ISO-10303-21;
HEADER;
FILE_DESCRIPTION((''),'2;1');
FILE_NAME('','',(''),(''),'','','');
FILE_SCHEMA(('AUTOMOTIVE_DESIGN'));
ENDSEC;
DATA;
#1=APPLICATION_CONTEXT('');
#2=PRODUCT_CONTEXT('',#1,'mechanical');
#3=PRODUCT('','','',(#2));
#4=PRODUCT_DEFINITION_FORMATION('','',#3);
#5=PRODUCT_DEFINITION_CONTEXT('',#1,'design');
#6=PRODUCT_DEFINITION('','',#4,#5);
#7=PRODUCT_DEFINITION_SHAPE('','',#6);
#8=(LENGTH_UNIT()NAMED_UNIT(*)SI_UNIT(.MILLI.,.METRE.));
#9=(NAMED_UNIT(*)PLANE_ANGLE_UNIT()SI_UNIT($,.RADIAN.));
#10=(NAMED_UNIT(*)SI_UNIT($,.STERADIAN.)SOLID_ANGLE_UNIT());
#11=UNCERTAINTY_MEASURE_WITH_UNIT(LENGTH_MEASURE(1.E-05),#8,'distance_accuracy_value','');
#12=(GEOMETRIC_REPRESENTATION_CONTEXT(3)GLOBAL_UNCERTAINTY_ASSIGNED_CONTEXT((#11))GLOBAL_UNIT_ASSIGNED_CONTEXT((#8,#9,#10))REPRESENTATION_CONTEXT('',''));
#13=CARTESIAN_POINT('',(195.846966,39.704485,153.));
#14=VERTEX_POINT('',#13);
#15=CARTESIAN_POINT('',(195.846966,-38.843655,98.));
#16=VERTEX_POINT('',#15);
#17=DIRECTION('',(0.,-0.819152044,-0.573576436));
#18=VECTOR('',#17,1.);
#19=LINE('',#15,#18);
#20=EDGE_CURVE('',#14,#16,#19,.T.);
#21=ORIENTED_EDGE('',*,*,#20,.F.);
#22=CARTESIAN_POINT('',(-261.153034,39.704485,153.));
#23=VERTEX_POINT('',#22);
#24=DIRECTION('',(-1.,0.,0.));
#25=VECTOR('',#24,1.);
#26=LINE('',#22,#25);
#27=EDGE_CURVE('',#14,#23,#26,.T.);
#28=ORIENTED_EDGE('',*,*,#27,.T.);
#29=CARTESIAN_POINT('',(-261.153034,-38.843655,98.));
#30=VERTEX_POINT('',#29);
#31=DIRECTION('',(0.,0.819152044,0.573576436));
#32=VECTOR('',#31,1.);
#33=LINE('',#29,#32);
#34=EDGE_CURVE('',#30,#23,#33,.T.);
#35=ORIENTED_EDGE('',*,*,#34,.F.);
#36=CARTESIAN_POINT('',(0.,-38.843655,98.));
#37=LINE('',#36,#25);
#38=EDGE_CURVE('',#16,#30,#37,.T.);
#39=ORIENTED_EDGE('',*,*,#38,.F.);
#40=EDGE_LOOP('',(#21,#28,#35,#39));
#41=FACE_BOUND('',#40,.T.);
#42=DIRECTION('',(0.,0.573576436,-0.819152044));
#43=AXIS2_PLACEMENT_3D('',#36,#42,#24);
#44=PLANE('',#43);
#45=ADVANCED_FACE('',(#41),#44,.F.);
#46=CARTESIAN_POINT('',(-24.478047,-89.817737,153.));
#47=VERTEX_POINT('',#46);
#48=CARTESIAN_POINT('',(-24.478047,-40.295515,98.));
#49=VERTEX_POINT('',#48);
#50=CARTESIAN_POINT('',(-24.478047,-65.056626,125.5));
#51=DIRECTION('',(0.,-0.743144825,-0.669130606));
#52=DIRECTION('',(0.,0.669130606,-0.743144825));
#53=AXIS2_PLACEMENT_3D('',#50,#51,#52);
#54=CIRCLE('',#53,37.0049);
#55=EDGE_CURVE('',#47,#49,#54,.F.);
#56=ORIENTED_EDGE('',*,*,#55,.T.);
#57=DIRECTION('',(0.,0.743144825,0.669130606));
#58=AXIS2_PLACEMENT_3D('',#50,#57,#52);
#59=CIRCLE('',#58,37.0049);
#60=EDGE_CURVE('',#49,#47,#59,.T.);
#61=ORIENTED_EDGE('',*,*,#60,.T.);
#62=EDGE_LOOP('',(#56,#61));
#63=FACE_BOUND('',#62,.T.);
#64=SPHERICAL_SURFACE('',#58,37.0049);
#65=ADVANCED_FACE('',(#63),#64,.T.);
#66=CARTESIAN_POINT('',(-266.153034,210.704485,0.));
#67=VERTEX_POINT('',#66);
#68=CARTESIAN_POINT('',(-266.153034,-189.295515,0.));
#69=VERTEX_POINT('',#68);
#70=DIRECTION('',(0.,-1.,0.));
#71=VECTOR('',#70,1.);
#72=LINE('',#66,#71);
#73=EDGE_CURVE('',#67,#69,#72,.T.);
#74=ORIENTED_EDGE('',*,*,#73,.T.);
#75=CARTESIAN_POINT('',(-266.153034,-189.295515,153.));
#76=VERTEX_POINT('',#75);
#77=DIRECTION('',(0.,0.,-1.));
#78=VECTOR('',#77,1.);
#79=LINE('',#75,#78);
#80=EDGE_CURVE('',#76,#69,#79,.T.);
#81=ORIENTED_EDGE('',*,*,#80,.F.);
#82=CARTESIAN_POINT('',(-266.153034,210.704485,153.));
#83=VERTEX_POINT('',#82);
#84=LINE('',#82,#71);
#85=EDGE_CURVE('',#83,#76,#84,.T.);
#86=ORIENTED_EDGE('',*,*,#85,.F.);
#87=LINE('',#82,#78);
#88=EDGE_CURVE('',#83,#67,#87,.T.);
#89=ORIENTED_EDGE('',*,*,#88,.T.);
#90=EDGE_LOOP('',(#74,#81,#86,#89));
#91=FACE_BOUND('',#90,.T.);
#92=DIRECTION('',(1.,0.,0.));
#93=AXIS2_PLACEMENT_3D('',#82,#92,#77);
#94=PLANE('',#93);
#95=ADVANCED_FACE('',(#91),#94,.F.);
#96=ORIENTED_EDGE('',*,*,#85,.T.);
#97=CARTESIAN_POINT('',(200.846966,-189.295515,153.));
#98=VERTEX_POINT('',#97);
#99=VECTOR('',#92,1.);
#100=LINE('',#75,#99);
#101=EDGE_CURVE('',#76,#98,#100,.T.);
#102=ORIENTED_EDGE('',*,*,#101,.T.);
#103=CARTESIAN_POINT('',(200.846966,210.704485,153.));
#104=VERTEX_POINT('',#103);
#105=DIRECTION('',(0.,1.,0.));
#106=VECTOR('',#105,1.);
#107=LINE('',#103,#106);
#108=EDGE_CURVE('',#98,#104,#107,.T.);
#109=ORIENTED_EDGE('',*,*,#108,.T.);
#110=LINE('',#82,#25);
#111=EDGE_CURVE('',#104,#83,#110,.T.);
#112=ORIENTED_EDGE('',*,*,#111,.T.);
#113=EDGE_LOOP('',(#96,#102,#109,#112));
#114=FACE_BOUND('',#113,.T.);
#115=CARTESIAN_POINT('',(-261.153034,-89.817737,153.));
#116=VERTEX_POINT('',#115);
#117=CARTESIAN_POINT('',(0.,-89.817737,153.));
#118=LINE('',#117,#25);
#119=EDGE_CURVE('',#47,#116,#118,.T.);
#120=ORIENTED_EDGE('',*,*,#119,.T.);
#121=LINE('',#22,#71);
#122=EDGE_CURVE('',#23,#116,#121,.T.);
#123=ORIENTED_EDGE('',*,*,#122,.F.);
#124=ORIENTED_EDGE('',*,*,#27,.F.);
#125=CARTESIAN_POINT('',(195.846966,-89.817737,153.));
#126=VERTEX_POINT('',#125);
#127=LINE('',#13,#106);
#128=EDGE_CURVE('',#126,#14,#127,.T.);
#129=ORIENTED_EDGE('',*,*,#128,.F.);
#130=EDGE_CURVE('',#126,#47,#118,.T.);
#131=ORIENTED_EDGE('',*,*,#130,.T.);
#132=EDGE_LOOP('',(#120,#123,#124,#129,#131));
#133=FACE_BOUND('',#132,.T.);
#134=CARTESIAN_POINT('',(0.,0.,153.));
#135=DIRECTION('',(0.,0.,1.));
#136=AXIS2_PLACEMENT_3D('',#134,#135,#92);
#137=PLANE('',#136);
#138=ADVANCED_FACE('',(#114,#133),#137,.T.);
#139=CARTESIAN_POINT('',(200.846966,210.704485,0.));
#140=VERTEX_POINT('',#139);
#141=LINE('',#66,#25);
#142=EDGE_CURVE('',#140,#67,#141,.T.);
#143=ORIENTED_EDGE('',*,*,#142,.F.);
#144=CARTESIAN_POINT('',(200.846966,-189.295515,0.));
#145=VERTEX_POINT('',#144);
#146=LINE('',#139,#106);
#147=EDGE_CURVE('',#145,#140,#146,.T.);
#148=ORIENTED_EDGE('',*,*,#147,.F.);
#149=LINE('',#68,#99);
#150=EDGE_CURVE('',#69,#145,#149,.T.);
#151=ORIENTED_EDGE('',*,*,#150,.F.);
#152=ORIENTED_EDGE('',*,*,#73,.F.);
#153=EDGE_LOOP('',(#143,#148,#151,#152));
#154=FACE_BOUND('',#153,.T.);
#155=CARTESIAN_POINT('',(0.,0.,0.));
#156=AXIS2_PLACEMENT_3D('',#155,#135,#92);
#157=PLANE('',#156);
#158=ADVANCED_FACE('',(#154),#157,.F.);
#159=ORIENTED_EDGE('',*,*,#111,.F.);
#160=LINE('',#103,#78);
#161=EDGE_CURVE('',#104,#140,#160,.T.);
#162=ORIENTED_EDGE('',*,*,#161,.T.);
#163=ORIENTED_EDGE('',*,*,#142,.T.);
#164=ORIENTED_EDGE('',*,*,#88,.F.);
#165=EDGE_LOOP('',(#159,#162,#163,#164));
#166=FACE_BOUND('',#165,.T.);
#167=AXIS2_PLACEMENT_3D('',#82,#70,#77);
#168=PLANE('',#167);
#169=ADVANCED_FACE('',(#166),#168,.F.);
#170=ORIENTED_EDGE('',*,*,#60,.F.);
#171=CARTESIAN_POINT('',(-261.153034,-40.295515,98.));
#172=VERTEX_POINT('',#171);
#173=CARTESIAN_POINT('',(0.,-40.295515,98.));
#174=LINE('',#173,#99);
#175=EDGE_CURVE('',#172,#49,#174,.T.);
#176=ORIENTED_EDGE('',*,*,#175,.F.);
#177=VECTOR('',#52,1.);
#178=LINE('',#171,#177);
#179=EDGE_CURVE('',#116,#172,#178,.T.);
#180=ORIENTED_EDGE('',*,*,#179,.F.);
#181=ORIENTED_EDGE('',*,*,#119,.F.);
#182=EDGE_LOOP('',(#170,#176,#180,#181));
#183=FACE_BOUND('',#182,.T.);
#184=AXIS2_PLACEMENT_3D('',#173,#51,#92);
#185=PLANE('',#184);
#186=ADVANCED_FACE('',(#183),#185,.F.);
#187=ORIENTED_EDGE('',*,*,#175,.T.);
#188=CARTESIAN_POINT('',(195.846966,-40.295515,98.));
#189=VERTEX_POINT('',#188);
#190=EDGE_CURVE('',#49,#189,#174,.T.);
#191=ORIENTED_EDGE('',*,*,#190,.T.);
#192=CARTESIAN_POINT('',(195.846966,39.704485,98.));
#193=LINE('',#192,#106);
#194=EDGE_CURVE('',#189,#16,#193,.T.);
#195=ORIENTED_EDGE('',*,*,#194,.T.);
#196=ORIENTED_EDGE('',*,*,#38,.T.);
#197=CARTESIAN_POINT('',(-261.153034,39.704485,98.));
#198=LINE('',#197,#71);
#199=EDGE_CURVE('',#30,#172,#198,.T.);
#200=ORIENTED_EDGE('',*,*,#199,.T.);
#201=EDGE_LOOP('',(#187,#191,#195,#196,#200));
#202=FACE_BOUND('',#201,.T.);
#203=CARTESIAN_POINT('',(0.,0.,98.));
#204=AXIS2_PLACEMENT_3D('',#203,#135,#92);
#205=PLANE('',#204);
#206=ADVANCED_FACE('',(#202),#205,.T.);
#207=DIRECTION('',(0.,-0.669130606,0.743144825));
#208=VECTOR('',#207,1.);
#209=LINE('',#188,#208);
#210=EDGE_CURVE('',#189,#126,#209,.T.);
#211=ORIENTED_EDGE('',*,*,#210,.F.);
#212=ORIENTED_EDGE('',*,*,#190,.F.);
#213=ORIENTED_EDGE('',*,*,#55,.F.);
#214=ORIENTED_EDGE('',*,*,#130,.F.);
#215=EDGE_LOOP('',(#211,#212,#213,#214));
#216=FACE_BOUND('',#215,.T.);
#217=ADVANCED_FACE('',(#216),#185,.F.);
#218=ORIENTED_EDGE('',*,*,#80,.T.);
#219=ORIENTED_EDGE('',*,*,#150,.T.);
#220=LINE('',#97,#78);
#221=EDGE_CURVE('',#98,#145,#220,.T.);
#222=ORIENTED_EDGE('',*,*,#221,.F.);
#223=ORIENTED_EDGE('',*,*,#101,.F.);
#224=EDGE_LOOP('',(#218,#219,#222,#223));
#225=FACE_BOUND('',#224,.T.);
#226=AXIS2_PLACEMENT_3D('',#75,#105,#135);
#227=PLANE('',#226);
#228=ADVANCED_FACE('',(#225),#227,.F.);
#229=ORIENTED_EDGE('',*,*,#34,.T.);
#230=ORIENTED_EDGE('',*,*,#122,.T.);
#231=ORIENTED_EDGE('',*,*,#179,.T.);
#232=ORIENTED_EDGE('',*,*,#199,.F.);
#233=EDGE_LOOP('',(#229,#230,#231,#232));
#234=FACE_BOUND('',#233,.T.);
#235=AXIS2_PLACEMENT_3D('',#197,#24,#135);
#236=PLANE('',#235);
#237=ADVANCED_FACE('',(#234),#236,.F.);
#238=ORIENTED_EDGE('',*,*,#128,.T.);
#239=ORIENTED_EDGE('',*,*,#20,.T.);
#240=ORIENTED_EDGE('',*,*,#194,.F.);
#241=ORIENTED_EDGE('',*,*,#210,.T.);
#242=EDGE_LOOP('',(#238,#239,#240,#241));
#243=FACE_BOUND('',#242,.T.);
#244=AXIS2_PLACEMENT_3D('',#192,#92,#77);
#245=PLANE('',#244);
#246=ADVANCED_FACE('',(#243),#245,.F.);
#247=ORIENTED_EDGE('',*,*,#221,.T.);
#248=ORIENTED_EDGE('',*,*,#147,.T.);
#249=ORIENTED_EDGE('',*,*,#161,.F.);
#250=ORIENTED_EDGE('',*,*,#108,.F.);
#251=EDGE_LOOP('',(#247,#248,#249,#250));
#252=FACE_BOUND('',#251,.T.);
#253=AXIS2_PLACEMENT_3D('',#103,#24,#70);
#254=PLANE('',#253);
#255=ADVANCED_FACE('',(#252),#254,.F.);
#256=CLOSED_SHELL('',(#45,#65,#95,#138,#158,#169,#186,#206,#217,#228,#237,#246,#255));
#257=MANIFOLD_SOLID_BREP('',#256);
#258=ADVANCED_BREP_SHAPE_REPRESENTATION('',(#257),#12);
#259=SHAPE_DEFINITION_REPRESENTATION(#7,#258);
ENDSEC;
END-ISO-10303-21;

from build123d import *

# Parameters (mm, degrees)
ESQUISSE1_W             = 467
ESQUISSE1_H             = 400
BOSS_EXTRU_1_DEPTH      = 153
ESQUISSE2_W             = 457
ESQUISSE2_H             = 130
ENL_V_MAT_EXTRU_1_DEPTH = 55
CHANFREIN2_SIZE2        = 78.548140371
CHANFREIN2_SIZE         = 55
CHANFREIN3_SIZE         = 50
CHANFREIN3_SIZE_2       = 55.530625741
R_VOLUTION1_ANGLE       = 182


# Some blends are built 0.0001 mm under size
with BuildPart() as part:
    # Esquisse1 → Boss.-Extru.1 (new body)
    with BuildSketch(Plane.XY):
        with Locations((-32.653034301, 10.704485488)):
            Rectangle(ESQUISSE1_W, ESQUISSE1_H)
    extrude(amount=BOSS_EXTRU_1_DEPTH)

    # Esquisse2 → Enlèv. mat.-Extru.1 (cut)
    with BuildSketch(Plane.XY.offset(153)):
        with Locations((-32.653034301, -25.295514512)):
            Rectangle(ESQUISSE2_W, ESQUISSE2_H)
    extrude(amount=-ENL_V_MAT_EXTRU_1_DEPTH, mode=Mode.SUBTRACT)

    # Chanfrein2
    chanfrein2_edges = [part.edges().sort_by_distance(p)[0] for p in [
        (-32.653034301, 39.704485488, 98),
    ]]
    chanfrein2_side = [part.faces().sort_by_distance(p)[0] for p in [
        (-32.653034301, 39.704485488, 99.1),
    ]]
    chamfer(chanfrein2_edges, length=CHANFREIN2_SIZE - 0.0001, length2=CHANFREIN2_SIZE2 - 0.0001, reference=chanfrein2_side[0])  # a hair under: the kernel refuses the full size

    # Chanfrein3
    # the kernel refuses this chamfer: 55.530625741, 50 mm, written as the material it adds along each edge
    with BuildSketch(Plane(origin=(195.846965699, -90.295514512, 98), x_dir=(0, 0.9994864482690293, -0.03204434000819546), z_dir=(-1, 0, 0))) as chanfrein3_piece_1_section:
        Polygon((CHANFREIN3_SIZE * 0.999486448269, -CHANFREIN3_SIZE * 0.0320443400082), (-CHANFREIN3_SIZE_2 * 0.0320443400085, -CHANFREIN3_SIZE_2 * 0.999486448277), (0, 0), align=None)
    chanfrein3_piece_1 = extrude(amount=457, mode=Mode.PRIVATE)
    chanfrein3_piece_1 = split(chanfrein3_piece_1, bisect_by=Plane(origin=(-32.653034301, -73.821041767, 153), z_dir=(0, 0, -1)), keep=Keep.TOP, mode=Mode.PRIVATE)
    add(chanfrein3_piece_1)

    # Esquisse3 → Révolution1 (revolve)
    with BuildSketch(Plane(origin=(0, 26.477801513, 23.840719566), x_dir=(1, 0, 0), z_dir=(0, 0.7431448254773976, 0.6691306063588547))):
        with BuildLine():
            Line((-24.478047151, -173.800955084), (-24.478047151, -99.791154956))
            ThreePointArc((-24.478047151, -99.791154956), (-61.482947215, -136.79605502), (-24.478047151, -173.800955084))
        make_face()
    revolve(axis=Axis((-24.478047151, -89.817736948, 153), (0, 0.6691306063588548, -0.7431448254773975)), revolution_arc=R_VOLUTION1_ANGLE)


solid = part.part
